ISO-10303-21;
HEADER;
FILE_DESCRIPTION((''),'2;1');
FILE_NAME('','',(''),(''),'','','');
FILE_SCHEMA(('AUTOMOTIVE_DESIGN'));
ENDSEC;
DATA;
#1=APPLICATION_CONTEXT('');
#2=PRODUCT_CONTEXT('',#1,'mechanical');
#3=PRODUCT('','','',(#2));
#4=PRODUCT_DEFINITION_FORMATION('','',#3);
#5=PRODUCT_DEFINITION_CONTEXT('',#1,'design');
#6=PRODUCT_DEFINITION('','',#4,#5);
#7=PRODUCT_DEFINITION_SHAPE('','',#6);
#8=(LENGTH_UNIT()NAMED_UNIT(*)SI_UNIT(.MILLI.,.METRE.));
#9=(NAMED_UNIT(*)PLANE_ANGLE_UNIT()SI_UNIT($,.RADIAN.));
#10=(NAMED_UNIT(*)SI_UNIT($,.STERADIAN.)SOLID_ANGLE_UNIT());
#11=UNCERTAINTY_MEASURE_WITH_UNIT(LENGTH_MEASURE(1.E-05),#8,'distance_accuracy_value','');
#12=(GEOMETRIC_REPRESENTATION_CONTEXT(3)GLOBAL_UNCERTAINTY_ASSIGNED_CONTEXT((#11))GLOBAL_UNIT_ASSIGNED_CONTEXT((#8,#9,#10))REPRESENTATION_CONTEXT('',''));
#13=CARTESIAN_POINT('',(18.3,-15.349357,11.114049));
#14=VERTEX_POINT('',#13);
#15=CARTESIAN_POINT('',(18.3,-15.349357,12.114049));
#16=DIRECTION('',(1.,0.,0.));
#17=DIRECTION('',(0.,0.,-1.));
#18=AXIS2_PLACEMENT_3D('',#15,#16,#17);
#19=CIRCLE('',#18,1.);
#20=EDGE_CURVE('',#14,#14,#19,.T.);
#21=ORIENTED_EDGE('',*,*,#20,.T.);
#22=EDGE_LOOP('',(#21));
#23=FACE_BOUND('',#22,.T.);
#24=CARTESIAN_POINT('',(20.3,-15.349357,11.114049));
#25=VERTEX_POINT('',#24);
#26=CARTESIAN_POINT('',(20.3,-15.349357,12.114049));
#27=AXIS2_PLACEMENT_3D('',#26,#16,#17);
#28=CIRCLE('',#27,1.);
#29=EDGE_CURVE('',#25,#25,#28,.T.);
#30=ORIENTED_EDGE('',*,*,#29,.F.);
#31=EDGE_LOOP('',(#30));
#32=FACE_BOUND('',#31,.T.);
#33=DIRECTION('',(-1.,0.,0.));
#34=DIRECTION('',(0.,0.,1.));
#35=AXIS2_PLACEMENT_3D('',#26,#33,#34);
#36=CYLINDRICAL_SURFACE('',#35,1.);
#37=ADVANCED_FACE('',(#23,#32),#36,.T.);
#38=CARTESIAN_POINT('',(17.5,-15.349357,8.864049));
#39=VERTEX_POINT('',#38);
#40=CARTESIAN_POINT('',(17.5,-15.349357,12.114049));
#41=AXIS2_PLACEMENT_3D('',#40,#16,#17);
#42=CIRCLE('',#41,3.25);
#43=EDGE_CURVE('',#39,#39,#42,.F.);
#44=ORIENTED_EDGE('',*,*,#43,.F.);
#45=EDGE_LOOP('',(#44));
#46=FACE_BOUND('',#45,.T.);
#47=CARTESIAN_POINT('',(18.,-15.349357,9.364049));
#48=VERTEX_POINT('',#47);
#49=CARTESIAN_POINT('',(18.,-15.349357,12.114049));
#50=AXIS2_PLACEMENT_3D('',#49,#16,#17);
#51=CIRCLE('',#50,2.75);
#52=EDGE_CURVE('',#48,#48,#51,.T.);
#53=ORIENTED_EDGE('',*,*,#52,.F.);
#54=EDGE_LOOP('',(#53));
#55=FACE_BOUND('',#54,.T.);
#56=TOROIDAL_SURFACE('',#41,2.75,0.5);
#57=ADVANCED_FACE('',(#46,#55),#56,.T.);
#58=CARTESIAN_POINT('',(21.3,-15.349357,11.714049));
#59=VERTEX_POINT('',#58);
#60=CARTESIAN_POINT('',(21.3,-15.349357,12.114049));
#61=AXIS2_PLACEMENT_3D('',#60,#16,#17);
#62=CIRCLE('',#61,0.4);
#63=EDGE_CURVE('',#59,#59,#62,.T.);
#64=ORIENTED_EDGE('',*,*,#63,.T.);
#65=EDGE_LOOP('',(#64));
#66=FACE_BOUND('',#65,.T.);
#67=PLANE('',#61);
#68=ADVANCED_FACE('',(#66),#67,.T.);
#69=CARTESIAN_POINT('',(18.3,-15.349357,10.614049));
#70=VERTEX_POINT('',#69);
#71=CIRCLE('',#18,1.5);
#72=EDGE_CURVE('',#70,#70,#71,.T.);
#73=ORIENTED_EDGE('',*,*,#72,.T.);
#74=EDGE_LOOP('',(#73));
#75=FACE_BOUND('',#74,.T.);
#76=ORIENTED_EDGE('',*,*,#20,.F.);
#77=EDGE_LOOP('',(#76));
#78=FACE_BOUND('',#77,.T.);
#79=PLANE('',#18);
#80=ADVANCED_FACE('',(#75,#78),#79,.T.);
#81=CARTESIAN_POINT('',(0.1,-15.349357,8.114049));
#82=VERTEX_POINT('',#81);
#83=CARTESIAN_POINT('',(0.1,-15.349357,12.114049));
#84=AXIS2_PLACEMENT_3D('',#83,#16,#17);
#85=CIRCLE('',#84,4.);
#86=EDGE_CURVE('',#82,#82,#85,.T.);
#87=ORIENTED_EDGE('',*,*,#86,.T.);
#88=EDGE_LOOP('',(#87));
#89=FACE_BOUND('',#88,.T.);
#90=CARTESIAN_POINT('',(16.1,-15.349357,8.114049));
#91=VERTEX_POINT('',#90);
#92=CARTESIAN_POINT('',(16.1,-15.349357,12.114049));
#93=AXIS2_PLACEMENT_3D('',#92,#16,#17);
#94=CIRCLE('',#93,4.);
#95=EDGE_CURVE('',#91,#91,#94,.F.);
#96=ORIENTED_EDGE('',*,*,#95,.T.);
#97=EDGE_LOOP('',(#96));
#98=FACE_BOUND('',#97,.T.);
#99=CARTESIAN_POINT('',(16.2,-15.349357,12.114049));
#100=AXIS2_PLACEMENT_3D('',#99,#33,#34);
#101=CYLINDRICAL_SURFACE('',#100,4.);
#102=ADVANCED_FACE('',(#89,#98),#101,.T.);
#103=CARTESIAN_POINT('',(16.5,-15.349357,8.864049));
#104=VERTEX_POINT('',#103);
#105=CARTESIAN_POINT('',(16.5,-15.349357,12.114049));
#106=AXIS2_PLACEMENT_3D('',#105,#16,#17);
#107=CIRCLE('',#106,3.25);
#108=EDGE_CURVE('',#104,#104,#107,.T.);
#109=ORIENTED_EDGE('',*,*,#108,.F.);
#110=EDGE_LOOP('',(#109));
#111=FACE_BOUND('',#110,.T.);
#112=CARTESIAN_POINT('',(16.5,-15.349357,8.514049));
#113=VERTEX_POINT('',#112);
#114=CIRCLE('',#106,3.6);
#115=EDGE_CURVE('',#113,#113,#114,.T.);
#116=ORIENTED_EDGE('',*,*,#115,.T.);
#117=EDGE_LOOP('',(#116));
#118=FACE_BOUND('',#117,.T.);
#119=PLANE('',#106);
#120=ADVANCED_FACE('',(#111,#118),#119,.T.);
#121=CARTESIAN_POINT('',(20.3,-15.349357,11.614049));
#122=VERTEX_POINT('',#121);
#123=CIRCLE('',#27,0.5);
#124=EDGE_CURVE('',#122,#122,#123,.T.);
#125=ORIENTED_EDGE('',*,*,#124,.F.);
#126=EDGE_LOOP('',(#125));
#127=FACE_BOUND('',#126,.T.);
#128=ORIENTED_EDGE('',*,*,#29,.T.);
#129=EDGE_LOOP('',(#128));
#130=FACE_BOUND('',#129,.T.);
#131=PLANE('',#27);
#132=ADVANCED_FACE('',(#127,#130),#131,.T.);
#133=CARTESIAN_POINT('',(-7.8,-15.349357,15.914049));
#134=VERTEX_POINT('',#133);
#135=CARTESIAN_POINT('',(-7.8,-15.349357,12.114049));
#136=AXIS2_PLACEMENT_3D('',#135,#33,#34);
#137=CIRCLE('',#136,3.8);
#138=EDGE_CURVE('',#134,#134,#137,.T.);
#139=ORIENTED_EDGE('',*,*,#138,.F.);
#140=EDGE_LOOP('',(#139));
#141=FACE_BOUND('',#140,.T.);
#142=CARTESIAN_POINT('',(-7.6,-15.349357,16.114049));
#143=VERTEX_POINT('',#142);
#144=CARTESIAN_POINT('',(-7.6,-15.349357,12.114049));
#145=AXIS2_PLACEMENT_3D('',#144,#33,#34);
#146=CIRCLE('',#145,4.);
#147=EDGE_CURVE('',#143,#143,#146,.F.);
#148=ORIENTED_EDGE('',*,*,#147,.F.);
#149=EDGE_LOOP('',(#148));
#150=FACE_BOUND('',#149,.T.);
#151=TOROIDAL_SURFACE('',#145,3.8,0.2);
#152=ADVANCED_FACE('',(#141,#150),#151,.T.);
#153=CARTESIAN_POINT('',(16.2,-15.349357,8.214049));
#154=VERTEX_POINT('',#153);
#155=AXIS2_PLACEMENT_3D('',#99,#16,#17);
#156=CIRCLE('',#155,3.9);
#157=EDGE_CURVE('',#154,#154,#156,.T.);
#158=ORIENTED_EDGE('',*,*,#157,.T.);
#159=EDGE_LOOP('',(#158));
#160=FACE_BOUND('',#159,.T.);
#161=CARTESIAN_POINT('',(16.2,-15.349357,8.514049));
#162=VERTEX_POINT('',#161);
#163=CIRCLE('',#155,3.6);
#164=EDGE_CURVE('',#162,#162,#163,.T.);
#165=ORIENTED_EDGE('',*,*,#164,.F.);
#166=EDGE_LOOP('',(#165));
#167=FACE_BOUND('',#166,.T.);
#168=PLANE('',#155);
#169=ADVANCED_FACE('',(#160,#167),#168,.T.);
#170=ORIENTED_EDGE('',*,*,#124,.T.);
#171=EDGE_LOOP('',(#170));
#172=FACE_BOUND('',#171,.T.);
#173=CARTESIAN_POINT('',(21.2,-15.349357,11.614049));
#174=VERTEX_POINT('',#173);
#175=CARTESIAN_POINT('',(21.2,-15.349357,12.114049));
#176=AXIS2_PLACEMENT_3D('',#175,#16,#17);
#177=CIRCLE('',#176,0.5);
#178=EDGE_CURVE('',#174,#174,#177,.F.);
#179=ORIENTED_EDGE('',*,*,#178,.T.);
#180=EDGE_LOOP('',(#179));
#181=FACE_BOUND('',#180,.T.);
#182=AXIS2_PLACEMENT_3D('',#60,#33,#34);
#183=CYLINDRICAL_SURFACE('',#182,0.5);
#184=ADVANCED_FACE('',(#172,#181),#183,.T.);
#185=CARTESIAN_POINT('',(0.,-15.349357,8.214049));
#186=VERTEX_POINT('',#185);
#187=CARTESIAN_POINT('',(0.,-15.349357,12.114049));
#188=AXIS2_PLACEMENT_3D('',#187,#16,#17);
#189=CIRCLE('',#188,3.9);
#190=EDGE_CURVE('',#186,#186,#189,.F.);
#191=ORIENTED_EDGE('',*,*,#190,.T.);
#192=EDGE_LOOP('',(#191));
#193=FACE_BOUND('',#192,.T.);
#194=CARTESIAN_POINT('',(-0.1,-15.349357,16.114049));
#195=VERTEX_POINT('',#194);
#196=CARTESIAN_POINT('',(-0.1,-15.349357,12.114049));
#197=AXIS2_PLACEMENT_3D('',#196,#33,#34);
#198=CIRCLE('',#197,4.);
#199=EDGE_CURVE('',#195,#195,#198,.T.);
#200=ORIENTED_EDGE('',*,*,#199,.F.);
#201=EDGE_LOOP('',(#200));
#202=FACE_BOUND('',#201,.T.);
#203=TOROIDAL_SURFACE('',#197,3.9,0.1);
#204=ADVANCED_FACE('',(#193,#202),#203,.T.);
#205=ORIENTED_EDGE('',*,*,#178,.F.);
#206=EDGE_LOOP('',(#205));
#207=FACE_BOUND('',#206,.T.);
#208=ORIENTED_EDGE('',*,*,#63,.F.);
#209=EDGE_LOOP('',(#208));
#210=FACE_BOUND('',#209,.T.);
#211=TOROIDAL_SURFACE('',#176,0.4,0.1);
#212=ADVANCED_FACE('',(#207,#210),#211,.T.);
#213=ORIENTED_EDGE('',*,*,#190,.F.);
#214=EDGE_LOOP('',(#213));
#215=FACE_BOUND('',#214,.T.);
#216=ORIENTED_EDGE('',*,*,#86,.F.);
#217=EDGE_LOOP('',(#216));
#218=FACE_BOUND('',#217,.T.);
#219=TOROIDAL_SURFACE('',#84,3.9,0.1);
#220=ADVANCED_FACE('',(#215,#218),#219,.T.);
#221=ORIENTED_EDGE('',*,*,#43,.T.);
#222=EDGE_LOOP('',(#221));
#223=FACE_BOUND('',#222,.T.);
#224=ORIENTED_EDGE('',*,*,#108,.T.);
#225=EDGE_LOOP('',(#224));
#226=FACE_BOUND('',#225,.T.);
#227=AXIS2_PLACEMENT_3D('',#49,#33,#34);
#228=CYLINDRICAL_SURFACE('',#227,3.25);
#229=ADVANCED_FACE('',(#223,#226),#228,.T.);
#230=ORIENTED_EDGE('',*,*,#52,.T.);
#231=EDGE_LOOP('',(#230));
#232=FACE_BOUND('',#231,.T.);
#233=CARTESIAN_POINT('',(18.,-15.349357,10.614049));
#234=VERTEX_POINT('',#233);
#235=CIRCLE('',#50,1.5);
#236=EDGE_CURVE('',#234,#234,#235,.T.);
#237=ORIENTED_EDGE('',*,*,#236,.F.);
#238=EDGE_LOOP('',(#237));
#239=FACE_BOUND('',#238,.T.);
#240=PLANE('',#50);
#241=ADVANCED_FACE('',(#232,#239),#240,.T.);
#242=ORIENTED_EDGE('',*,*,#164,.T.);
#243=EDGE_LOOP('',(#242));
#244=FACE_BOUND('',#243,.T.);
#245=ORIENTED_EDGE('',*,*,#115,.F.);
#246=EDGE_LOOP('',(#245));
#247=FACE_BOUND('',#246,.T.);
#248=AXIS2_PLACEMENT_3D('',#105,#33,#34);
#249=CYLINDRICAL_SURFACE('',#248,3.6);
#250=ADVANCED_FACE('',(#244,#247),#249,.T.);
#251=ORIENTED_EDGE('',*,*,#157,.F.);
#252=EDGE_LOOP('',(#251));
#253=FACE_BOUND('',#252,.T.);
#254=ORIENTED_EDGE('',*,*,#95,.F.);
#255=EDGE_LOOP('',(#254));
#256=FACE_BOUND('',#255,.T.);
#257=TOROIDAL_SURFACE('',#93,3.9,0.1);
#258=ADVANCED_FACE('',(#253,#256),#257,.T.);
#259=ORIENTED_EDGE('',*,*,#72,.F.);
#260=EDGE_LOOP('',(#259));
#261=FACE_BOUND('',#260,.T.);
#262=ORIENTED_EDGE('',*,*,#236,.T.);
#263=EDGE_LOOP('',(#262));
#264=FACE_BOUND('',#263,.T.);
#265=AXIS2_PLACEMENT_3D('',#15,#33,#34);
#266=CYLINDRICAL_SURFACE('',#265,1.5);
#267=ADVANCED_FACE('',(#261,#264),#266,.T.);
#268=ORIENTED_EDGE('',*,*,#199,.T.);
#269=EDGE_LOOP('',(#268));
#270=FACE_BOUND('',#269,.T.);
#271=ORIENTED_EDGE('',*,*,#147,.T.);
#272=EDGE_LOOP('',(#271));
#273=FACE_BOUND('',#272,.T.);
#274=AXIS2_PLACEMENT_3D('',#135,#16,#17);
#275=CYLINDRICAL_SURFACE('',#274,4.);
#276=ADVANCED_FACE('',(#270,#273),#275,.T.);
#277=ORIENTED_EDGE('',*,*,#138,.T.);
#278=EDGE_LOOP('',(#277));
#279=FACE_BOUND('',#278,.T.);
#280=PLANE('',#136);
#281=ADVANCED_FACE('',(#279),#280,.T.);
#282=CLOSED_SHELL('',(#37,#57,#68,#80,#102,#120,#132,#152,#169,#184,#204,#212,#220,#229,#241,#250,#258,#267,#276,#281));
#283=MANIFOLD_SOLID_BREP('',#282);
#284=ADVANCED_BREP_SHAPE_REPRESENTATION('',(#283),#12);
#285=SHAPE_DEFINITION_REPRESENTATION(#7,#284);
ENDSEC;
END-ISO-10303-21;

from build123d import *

# Parameters (mm, degrees)
SKETCH1_R           = 4
BOSS_EXTRUDE1_DEPTH = 16.2
SKETCH2_R           = 3.6
BOSS_EXTRUDE2_DEPTH = 0.3
SKETCH3_R           = 3.25
BOSS_EXTRUDE3_DEPTH = 1.5
FILLET1_R           = 0.5
SKETCH4_R           = 1.5
BOSS_EXTRUDE4_DEPTH = 0.3
SKETCH5_R           = 1
BOSS_EXTRUDE5_DEPTH = 2
SKETCH6_R           = 0.5
BOSS_EXTRUDE6_DEPTH = 1
FILLET2_R           = 0.1
FILLET3_R           = 0.1
BOSS_EXTRUDE7_START = 7.8
SKETCH7_R           = 4
BOSS_EXTRUDE7_DEPTH = 7.8
FILLET4_R           = 0.2
FILLET5_R           = 0.1
FILLET6_R           = 0.1


with BuildPart() as part:
    # Sketch1 → Boss-Extrude1 (new body)
    with BuildSketch(Plane(origin=(0, 0, 0), x_dir=(0, 0, -1), z_dir=(1, 0, 0))):
        with Locations((-12.114049009, -15.349356514)):
            Circle(SKETCH1_R)
    extrude(amount=BOSS_EXTRUDE1_DEPTH)

    # Sketch2 → Boss-Extrude2 (add)
    with BuildSketch(Plane(origin=(16.2, 0, 0), x_dir=(0, 0, -1), z_dir=(1, 0, 0))):
        with Locations((-12.114049009, -15.349356514)):
            Circle(SKETCH2_R)
    extrude(amount=BOSS_EXTRUDE2_DEPTH)

    # Sketch3 → Boss-Extrude3 (add)
    with BuildSketch(Plane(origin=(16.5, 0, 0), x_dir=(0, 0, -1), z_dir=(1, 0, 0))):
        with Locations((-12.114049009, -15.349356514)):
            Circle(SKETCH3_R)
    extrude(amount=BOSS_EXTRUDE3_DEPTH)

    # Fillet1
    fillet1_edges = [part.edges().sort_by_distance(p)[0] for p in [
        (18, -15.349356514, 15.364049009),
    ]]
    fillet(fillet1_edges, radius=FILLET1_R)

    # Sketch4 → Boss-Extrude4 (add)
    with BuildSketch(Plane(origin=(18, 0, 0), x_dir=(0, 0, -1), z_dir=(1, 0, 0))):
        with Locations((-12.114049009, -15.349356514)):
            Circle(SKETCH4_R)
    extrude(amount=BOSS_EXTRUDE4_DEPTH)

    # Sketch5 → Boss-Extrude5 (add)
    with BuildSketch(Plane(origin=(18.3, 0, 0), x_dir=(0, 0, -1), z_dir=(1, 0, 0))):
        with Locations((-12.114049009, -15.349356514)):
            Circle(SKETCH5_R)
    extrude(amount=BOSS_EXTRUDE5_DEPTH)

    # Sketch6 → Boss-Extrude6 (add)
    with BuildSketch(Plane(origin=(20.3, 0, 0), x_dir=(0, 0, -1), z_dir=(1, 0, 0))):
        with Locations((-12.114049009, -15.349356514)):
            Circle(SKETCH6_R)
    extrude(amount=BOSS_EXTRUDE6_DEPTH)

    # Fillet2
    fillet2_edges = [part.edges().sort_by_distance(p)[0] for p in [
        (0, -15.349356514, 16.114049009),
    ]]
    fillet(fillet2_edges, radius=FILLET2_R)

    # Fillet3
    fillet3_edges = [part.edges().sort_by_distance(p)[0] for p in [
        (16.2, -15.349356514, 16.114049009),
    ]]
    fillet(fillet3_edges, radius=FILLET3_R)

    # Sketch7 → Boss-Extrude7 (add)
    with BuildSketch(Plane.ZY.offset(BOSS_EXTRUDE7_START)):
        with Locations(Location((12.114049009, -15.349356514, 0), (0, 0, 180))):
            Circle(SKETCH7_R)
    extrude(amount=-BOSS_EXTRUDE7_DEPTH)

    # Fillet4
    fillet4_edges = [part.edges().sort_by_distance(p)[0] for p in [
        (-7.8, -15.349356514, 16.114049009),
    ]]
    fillet(fillet4_edges, radius=FILLET4_R)

    # Fillet5
    fillet5_edges = [part.edges().sort_by_distance(p)[0] for p in [
        (0, -15.349356514, 16.114049009),
    ]]
    fillet(fillet5_edges, radius=FILLET5_R - 0.0001)  # a hair under: the kernel refuses the full size

    # Fillet6
    fillet6_edges = [part.edges().sort_by_distance(p)[0] for p in [
        (21.3, -15.349356514, 12.614049009),
    ]]
    fillet(fillet6_edges, radius=FILLET6_R)


solid = part.part
